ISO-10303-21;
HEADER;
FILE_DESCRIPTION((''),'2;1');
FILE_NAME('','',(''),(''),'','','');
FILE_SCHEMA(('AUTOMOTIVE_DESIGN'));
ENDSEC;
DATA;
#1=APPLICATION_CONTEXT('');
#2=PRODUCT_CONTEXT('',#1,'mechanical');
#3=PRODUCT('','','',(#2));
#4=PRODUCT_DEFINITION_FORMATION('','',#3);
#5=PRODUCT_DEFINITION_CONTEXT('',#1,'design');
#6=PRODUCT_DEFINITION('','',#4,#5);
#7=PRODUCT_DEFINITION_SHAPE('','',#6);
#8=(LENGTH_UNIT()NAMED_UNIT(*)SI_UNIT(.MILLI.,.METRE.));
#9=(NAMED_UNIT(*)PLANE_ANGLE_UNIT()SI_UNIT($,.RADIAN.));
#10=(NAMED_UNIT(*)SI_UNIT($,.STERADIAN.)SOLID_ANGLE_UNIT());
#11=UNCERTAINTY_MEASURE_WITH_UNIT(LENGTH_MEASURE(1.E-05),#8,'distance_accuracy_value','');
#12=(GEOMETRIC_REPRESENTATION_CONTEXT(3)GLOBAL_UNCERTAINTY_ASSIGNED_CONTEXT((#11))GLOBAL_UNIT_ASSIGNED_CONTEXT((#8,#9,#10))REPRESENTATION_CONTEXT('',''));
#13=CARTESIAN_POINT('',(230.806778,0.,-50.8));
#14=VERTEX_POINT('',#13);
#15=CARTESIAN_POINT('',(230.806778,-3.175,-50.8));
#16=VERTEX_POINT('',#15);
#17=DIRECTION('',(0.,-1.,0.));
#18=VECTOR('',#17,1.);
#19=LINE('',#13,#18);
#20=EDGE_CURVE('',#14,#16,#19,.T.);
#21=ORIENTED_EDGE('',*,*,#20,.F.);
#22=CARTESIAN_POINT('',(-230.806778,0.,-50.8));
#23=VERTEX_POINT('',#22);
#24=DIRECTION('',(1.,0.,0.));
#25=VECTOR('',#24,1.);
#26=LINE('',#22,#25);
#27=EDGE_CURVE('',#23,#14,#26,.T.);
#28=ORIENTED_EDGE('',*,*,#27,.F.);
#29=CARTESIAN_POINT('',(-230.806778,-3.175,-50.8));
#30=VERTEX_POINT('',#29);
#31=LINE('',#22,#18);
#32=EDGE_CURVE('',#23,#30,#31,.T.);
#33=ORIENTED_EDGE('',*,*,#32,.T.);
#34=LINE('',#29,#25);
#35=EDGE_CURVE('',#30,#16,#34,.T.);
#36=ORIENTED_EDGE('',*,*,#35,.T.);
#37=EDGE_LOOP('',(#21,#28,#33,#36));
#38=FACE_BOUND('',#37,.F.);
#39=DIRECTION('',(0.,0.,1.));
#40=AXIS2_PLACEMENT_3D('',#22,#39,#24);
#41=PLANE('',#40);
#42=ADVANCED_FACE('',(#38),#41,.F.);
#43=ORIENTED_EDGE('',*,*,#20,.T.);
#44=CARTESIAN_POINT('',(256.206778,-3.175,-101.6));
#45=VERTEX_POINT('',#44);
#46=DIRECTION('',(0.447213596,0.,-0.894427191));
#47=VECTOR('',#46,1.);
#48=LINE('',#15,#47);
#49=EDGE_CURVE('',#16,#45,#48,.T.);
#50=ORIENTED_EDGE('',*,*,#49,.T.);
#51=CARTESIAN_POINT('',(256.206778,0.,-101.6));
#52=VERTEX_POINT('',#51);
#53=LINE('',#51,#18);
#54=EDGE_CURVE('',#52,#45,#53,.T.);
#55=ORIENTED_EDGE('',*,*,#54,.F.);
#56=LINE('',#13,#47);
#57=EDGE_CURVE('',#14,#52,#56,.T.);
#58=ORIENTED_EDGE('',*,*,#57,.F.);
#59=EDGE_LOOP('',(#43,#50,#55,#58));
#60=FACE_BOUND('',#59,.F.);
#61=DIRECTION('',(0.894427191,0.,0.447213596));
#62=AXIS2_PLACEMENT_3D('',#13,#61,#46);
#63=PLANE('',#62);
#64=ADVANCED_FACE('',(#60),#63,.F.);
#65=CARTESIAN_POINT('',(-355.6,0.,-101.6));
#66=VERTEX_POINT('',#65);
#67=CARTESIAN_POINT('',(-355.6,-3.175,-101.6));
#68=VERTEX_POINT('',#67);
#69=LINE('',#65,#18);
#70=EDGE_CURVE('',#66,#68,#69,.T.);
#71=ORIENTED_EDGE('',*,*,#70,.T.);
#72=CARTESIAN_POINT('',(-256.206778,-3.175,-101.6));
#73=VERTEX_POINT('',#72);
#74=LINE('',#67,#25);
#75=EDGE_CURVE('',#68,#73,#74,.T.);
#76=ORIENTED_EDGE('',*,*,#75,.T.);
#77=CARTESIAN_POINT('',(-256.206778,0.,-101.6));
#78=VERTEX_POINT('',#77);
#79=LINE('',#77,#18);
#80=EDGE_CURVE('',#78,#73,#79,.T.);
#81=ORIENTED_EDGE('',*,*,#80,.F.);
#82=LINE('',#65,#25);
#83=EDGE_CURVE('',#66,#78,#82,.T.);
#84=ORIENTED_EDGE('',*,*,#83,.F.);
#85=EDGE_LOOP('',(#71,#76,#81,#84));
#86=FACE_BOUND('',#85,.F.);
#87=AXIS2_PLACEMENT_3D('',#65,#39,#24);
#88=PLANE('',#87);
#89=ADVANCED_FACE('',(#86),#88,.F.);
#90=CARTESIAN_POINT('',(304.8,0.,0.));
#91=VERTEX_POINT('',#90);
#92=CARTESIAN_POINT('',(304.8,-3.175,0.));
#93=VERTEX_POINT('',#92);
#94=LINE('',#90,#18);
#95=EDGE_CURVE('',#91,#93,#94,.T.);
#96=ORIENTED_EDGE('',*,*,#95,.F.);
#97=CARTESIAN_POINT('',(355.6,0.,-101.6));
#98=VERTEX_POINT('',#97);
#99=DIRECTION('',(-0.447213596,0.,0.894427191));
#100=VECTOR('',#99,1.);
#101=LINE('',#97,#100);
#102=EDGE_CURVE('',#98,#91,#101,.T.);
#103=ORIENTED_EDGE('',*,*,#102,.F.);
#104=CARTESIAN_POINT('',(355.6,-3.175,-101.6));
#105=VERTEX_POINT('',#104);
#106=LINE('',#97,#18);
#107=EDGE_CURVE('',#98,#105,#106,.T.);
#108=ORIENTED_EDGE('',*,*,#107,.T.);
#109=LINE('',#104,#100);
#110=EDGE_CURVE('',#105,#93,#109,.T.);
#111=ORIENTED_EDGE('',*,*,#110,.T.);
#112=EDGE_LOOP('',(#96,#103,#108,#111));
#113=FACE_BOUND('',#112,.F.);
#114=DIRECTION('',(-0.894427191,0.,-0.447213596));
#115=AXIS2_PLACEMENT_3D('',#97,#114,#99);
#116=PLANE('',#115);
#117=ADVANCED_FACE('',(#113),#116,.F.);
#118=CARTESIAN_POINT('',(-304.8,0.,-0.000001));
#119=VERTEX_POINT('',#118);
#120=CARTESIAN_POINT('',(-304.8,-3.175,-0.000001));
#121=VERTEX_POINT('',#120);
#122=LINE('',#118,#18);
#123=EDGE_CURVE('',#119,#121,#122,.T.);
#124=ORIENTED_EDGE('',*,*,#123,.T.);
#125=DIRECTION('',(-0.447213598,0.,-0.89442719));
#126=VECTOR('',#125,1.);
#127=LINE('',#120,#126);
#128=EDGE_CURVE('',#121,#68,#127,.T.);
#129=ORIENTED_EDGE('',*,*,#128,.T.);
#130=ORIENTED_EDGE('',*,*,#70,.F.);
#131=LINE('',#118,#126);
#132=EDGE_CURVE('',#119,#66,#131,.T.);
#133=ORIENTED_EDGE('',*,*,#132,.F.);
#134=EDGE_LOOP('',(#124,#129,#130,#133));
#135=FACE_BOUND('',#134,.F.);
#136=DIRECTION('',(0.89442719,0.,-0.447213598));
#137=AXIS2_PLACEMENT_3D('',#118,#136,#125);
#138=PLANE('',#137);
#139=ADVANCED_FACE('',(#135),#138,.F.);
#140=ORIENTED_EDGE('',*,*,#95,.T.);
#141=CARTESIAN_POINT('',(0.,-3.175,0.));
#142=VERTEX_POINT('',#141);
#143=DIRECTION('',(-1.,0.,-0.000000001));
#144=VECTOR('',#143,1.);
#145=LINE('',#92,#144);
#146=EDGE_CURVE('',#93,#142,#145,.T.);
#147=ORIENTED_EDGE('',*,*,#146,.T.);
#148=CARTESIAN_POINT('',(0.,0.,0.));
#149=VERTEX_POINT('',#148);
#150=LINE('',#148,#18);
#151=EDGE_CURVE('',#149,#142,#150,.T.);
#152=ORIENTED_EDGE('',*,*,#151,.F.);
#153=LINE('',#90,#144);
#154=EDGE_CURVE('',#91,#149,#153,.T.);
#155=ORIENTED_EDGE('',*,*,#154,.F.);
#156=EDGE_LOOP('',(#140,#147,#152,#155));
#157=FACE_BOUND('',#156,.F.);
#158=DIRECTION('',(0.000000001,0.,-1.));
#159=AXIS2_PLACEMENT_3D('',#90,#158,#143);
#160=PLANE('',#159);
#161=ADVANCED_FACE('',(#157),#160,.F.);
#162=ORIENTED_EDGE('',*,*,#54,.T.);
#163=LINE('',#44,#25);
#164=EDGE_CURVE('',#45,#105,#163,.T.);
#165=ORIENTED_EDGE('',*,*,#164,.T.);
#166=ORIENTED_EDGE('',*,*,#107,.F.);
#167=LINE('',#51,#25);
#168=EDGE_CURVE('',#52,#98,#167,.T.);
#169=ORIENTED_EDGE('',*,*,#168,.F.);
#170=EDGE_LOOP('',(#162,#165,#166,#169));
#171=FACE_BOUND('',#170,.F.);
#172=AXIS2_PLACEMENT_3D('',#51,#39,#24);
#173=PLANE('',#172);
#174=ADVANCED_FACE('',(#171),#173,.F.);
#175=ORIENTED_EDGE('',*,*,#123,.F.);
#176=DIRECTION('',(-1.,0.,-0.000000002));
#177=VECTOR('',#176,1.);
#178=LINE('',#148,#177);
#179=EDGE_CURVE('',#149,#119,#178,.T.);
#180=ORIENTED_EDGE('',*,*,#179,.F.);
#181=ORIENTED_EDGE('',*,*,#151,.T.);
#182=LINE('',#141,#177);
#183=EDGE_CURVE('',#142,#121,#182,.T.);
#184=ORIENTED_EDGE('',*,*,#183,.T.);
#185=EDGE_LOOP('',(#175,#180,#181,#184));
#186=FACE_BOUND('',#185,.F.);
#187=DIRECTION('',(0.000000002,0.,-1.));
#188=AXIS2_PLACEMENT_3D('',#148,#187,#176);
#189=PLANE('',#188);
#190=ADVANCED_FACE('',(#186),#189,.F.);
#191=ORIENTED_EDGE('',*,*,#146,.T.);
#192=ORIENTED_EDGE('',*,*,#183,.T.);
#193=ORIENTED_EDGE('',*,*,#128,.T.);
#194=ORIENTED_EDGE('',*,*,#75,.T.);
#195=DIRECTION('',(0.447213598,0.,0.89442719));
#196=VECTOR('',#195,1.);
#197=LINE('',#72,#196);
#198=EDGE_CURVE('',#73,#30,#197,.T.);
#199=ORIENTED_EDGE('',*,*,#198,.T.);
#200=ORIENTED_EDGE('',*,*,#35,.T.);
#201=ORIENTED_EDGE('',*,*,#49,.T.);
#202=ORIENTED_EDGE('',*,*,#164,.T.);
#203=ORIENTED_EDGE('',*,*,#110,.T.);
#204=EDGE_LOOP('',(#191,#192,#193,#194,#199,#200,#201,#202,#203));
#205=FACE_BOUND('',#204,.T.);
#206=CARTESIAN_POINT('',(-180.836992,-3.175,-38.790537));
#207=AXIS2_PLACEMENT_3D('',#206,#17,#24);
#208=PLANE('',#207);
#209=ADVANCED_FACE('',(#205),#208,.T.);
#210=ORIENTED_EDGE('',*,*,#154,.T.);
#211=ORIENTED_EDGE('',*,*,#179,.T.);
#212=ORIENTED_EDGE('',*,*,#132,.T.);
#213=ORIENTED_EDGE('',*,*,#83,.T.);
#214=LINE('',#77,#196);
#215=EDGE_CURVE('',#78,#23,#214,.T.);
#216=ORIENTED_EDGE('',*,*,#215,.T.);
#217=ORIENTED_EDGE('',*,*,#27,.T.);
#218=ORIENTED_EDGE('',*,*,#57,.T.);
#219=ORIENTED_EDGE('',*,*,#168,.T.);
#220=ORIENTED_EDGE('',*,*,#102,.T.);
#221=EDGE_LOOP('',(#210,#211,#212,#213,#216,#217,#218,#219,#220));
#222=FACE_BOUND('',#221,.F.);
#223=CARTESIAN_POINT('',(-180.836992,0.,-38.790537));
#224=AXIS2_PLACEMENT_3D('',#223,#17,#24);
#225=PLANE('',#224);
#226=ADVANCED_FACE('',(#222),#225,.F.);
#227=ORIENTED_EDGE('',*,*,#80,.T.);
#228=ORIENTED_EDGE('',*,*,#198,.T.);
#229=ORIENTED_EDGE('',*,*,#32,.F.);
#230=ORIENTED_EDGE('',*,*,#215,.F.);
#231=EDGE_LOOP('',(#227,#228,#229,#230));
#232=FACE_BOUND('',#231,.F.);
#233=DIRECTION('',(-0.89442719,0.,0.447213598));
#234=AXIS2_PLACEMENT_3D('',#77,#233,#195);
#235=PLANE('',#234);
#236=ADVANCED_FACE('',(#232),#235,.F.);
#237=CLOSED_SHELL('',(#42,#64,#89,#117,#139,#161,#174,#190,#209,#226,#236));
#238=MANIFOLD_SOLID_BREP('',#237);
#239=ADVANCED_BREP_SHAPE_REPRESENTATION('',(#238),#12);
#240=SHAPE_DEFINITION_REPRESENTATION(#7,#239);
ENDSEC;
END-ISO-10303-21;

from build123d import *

# Parameters (mm, degrees)
F1_DEPTH = 3.175


# Not quite as in the source:
# - ends of sketch curves that miss each other by under 0.0002 mm in the source are joined


with BuildPart() as f1:
    # F0 (on Front) → F1 (new body)
    with BuildSketch(Plane.XZ):
        Polygon((0, -50.8), (0, 0), (-304.8, -6.031e-07), (-355.6, -101.6), (-256.2067782821, -101.6), (-230.8067781314, -50.8), align=None)
        Polygon((304.8, 0), (0, -3.015e-07), (0, -50.8), (230.8067784001, -50.8), (256.2067784001, -101.6), (355.6, -101.6), align=None)
    extrude(amount=F1_DEPTH)


solid = f1.part
